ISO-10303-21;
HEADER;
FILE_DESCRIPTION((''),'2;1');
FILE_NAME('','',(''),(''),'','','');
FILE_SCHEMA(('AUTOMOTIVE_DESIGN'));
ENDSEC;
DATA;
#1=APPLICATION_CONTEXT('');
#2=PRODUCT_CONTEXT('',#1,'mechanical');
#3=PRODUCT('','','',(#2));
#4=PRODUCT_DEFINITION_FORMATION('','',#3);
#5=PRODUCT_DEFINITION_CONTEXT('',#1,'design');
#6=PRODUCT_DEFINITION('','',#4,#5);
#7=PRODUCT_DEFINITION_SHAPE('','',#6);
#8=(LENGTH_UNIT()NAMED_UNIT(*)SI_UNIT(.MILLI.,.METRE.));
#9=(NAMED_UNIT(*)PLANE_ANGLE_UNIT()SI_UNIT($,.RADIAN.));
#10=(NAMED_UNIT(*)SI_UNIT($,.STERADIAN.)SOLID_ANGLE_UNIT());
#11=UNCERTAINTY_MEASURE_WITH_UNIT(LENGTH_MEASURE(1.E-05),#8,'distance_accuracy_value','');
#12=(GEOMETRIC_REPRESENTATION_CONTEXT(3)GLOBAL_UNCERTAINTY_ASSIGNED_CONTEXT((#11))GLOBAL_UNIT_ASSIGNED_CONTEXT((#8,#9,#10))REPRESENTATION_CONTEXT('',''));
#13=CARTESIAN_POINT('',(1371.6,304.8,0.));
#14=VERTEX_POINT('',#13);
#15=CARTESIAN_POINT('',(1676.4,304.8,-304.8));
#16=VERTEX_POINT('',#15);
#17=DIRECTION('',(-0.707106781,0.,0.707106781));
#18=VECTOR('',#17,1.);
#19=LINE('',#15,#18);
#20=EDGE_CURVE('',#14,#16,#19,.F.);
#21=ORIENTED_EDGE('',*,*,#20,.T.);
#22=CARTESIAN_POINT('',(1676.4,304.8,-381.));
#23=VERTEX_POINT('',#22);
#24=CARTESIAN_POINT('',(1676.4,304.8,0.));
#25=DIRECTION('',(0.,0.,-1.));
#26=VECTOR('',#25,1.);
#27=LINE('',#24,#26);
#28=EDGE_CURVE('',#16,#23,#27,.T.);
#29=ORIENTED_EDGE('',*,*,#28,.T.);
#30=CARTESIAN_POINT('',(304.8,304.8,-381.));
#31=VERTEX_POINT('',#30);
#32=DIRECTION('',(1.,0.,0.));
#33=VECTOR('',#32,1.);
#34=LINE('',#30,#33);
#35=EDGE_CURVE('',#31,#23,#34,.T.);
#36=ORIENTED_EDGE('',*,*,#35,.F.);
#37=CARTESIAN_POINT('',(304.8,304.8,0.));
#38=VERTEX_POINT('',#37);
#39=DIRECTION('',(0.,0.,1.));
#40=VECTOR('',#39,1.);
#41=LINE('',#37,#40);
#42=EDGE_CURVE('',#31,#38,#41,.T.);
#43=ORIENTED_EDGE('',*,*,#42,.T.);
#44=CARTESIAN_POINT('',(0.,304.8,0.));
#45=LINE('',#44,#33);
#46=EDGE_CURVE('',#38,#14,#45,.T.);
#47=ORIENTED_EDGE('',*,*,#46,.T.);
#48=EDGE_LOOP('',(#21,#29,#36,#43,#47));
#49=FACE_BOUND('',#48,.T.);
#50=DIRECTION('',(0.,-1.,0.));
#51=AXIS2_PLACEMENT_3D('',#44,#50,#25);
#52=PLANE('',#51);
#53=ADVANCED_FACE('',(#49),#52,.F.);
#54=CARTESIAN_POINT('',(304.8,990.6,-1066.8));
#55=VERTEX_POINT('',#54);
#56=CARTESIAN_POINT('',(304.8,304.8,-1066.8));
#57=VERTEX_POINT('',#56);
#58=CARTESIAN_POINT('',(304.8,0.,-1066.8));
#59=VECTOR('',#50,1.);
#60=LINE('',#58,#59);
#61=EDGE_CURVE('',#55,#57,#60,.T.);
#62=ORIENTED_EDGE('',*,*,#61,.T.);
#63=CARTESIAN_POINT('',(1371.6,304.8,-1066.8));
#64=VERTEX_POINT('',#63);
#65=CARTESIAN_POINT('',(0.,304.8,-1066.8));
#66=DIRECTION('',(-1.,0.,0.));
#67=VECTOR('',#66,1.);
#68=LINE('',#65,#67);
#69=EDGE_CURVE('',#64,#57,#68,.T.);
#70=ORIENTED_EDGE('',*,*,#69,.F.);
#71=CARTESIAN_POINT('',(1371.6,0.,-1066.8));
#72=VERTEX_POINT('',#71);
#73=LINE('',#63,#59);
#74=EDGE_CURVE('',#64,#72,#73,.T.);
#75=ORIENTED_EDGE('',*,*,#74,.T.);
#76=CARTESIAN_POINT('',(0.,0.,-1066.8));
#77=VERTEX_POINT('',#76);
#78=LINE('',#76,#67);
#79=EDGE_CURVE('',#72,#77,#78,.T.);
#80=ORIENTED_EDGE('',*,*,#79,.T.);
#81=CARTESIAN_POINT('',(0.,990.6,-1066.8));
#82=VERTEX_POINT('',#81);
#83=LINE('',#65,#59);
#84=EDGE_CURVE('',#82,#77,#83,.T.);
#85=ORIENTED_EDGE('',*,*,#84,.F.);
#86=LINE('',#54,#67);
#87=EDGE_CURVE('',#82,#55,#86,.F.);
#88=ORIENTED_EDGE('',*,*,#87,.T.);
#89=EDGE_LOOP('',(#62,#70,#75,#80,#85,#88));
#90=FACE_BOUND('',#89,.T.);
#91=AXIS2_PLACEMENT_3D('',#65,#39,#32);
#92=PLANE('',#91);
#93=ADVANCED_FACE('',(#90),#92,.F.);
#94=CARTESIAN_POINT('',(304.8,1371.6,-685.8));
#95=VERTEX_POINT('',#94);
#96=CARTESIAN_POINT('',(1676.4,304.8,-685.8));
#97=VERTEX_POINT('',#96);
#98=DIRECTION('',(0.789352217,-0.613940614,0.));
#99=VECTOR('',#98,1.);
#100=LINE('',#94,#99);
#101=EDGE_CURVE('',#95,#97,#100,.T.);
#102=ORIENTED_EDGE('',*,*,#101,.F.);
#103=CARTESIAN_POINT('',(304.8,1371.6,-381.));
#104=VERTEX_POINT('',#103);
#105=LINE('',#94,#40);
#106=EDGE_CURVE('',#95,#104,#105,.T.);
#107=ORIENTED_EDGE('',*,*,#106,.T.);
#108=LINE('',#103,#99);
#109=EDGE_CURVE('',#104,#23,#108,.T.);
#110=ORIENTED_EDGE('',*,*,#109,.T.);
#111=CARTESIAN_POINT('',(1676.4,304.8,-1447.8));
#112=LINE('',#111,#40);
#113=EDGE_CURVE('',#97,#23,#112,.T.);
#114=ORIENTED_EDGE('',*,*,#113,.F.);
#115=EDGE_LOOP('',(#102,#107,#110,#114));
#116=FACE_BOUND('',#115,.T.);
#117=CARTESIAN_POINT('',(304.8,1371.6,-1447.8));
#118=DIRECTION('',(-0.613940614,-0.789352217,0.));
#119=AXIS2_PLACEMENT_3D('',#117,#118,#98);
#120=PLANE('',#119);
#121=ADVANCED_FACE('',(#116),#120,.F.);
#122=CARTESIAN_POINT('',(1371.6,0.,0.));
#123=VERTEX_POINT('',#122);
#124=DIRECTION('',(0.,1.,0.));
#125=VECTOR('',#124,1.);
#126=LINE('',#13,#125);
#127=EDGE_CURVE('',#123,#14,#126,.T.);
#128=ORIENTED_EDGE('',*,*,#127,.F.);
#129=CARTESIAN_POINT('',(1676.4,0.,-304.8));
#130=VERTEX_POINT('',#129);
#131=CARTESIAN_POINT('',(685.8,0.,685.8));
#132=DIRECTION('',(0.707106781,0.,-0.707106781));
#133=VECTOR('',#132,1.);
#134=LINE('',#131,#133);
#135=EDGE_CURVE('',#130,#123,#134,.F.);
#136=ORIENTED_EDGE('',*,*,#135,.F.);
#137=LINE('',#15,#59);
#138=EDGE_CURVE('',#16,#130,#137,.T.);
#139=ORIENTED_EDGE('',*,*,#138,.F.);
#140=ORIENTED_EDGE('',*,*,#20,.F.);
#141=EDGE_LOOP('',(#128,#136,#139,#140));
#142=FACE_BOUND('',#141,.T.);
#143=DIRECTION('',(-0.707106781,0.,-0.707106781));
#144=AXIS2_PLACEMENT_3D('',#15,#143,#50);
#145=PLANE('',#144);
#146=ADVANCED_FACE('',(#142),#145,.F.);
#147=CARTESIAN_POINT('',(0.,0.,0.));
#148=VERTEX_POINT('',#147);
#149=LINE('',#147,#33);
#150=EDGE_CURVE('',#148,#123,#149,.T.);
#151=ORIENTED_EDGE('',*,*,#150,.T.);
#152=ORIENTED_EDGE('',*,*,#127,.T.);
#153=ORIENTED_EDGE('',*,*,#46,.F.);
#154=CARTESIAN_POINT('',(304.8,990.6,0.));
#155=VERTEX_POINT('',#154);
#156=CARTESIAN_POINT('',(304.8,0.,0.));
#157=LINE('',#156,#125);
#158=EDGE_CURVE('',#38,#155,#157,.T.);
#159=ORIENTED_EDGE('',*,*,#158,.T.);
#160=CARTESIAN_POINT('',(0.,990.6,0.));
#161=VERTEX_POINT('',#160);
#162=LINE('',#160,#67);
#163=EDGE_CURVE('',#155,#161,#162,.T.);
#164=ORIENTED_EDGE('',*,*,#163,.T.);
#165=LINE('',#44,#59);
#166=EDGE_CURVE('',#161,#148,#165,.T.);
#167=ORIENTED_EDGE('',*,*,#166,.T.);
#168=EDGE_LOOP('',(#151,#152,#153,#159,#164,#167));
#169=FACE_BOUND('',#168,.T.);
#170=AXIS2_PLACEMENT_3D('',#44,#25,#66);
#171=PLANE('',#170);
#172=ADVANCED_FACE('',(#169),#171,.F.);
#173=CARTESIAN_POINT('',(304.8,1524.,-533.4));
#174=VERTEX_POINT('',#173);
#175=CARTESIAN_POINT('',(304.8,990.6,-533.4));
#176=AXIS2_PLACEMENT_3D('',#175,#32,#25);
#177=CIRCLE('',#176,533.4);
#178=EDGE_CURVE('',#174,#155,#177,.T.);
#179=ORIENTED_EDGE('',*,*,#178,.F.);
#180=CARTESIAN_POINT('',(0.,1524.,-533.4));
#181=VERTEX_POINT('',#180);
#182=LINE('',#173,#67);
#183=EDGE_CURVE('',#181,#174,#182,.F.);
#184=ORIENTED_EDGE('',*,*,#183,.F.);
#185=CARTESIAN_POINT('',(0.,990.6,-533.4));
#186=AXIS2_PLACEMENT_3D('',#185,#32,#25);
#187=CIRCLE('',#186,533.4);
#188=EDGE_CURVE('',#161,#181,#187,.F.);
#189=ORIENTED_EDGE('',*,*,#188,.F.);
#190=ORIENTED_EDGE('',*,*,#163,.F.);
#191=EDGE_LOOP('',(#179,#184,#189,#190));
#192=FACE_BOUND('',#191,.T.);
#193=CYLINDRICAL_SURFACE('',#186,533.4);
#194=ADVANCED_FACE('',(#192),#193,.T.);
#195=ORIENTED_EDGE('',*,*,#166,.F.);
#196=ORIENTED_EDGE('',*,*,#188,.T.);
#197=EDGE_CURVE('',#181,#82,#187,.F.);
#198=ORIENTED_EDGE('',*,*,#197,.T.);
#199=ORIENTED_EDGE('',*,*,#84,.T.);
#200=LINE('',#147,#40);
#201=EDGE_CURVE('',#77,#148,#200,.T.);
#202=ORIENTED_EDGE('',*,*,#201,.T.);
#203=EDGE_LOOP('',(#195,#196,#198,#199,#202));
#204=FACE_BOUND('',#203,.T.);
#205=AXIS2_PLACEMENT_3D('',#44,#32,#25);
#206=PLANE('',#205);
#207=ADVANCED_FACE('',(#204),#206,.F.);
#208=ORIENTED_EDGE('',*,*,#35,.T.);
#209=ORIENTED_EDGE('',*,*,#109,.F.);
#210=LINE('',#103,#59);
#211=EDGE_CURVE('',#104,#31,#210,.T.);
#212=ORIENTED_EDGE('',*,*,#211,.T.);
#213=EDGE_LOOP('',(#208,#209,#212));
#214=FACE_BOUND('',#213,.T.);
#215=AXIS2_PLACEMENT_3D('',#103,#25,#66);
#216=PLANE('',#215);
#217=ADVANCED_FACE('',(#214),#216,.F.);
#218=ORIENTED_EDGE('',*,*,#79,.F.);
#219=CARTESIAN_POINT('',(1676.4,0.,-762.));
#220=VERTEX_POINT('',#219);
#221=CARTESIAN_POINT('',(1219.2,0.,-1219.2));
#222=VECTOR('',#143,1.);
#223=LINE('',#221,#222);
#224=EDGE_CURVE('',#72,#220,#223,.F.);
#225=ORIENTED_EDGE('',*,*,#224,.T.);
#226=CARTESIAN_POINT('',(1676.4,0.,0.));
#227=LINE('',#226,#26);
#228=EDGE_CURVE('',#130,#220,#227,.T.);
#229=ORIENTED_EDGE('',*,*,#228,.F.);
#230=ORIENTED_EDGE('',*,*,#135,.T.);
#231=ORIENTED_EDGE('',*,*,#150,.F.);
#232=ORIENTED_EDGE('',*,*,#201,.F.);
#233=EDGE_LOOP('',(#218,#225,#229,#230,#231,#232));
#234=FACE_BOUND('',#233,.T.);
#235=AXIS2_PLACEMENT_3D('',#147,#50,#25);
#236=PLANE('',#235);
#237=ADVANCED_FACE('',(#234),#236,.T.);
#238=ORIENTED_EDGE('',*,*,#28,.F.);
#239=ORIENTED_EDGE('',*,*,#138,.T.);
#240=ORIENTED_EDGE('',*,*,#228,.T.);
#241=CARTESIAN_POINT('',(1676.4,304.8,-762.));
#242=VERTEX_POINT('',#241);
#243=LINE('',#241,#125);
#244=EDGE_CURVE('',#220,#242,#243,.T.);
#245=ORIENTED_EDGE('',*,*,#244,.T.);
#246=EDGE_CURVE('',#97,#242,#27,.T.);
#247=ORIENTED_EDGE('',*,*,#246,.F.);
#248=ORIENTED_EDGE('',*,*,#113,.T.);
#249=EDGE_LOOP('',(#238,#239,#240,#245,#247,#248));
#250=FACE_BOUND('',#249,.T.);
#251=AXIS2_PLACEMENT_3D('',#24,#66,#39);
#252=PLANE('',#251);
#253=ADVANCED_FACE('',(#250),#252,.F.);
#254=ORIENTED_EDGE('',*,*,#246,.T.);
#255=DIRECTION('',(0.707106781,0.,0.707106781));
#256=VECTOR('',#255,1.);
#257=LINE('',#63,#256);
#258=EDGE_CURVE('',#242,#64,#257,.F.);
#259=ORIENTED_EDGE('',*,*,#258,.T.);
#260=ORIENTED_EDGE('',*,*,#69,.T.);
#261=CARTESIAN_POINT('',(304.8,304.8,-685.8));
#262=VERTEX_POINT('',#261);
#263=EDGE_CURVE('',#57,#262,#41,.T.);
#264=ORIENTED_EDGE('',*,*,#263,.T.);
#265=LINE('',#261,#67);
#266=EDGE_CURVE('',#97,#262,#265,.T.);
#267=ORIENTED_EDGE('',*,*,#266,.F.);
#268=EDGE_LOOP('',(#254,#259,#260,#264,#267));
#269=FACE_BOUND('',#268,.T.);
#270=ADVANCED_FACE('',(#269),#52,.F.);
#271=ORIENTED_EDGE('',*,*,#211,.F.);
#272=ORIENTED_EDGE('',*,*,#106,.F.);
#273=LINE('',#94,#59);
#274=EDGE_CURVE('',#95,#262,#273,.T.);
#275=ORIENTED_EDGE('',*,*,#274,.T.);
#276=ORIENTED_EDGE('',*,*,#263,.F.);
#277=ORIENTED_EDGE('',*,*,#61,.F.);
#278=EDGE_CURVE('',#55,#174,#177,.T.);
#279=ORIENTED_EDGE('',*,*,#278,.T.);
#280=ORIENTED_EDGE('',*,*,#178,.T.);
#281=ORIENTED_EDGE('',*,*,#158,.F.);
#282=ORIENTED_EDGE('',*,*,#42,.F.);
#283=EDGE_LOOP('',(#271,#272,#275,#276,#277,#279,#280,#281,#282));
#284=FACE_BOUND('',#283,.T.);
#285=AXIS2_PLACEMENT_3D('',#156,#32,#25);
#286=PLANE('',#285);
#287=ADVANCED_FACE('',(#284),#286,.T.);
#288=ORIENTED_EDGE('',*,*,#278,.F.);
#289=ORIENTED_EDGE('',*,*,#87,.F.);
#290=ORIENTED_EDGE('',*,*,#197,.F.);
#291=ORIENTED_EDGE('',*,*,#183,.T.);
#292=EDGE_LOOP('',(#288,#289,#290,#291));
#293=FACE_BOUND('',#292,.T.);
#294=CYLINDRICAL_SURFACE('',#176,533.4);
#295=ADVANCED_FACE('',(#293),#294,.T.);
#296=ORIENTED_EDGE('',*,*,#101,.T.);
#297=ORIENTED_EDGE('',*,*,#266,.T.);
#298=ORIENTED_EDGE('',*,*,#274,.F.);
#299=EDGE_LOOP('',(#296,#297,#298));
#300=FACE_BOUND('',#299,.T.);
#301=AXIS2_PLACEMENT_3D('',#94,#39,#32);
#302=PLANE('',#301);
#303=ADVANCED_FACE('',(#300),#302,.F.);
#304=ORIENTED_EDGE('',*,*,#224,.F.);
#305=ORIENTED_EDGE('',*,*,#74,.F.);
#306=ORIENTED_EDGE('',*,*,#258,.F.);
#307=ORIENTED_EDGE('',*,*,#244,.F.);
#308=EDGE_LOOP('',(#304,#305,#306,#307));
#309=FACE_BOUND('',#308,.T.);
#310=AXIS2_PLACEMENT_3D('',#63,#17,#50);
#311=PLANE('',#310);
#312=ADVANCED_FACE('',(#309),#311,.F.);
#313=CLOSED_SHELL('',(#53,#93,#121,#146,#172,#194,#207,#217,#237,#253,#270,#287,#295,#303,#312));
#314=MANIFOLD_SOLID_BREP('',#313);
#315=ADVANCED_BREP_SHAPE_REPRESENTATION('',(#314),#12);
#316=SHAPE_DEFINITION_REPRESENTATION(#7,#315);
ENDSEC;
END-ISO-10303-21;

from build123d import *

# Parameters (mm, degrees)
SKETCH1_W           = 1676.4
SKETCH1_H           = 1066.8
BOSS_EXTRUDE1_DEPTH = 304.8
SKETCH2_W           = 1066.8
SKETCH2_H           = 1524
BOSS_EXTRUDE2_DEPTH = 304.8
FILLET1_R           = 533.4
SKETCH5_W           = 1371.6
SKETCH5_H           = 304.8
BOSS_EXTRUDE3_DEPTH = 1066.8
CUT_EXTRUDE1_DEPTH  = 1066.8
CHAMFER1_SIZE       = 304.8


with BuildPart() as part:
    # Sketch1 → Boss-Extrude1 (new body)
    with BuildSketch(Plane(origin=(0, 0, 0), x_dir=(1, 0, 0), z_dir=(0, 1, 0))):
        with Locations((838.2, 533.4)):
            Rectangle(SKETCH1_W, SKETCH1_H)
    extrude(amount=BOSS_EXTRUDE1_DEPTH)

    # Sketch2 → Boss-Extrude2 (add)
    with BuildSketch(Plane.ZY):
        with Locations((-533.4, 762)):
            Rectangle(SKETCH2_W, SKETCH2_H)
    extrude(amount=-BOSS_EXTRUDE2_DEPTH)

    # Fillet1
    fillet1_edges = [part.edges().sort_by_distance(p)[0] for p in [
        (152.4, 1524, -1066.8),
        (152.4, 1524, 0),
    ]]
    fillet(fillet1_edges, radius=FILLET1_R - 0.0001)  # a hair under: the kernel refuses the full size

    # Sketch5 → Boss-Extrude3 (add)
    with BuildSketch(Plane(origin=(0, 304.8, 0), x_dir=(1, 0, 0), z_dir=(0, 1, 0))):
        with Locations((990.6, 533.4)):
            Rectangle(SKETCH5_W, SKETCH5_H)
    extrude(amount=BOSS_EXTRUDE3_DEPTH)

    # Sketch6 → Cut-Extrude1 (cut)
    with BuildSketch(Plane.XY.offset(-381)):
        Polygon((304.8, 1371.6), (1676.4, 304.8), (1676.4, 1371.6), align=None)
    extrude(amount=-CUT_EXTRUDE1_DEPTH, mode=Mode.SUBTRACT)

    # Chamfer1
    chamfer1_edges = [part.edges().sort_by_distance(p)[0] for p in [
        (1676.4, 152.4, -1066.8),
        (1676.4, 152.4, 0),
    ]]
    chamfer(chamfer1_edges, length=CHAMFER1_SIZE)


solid = part.part
